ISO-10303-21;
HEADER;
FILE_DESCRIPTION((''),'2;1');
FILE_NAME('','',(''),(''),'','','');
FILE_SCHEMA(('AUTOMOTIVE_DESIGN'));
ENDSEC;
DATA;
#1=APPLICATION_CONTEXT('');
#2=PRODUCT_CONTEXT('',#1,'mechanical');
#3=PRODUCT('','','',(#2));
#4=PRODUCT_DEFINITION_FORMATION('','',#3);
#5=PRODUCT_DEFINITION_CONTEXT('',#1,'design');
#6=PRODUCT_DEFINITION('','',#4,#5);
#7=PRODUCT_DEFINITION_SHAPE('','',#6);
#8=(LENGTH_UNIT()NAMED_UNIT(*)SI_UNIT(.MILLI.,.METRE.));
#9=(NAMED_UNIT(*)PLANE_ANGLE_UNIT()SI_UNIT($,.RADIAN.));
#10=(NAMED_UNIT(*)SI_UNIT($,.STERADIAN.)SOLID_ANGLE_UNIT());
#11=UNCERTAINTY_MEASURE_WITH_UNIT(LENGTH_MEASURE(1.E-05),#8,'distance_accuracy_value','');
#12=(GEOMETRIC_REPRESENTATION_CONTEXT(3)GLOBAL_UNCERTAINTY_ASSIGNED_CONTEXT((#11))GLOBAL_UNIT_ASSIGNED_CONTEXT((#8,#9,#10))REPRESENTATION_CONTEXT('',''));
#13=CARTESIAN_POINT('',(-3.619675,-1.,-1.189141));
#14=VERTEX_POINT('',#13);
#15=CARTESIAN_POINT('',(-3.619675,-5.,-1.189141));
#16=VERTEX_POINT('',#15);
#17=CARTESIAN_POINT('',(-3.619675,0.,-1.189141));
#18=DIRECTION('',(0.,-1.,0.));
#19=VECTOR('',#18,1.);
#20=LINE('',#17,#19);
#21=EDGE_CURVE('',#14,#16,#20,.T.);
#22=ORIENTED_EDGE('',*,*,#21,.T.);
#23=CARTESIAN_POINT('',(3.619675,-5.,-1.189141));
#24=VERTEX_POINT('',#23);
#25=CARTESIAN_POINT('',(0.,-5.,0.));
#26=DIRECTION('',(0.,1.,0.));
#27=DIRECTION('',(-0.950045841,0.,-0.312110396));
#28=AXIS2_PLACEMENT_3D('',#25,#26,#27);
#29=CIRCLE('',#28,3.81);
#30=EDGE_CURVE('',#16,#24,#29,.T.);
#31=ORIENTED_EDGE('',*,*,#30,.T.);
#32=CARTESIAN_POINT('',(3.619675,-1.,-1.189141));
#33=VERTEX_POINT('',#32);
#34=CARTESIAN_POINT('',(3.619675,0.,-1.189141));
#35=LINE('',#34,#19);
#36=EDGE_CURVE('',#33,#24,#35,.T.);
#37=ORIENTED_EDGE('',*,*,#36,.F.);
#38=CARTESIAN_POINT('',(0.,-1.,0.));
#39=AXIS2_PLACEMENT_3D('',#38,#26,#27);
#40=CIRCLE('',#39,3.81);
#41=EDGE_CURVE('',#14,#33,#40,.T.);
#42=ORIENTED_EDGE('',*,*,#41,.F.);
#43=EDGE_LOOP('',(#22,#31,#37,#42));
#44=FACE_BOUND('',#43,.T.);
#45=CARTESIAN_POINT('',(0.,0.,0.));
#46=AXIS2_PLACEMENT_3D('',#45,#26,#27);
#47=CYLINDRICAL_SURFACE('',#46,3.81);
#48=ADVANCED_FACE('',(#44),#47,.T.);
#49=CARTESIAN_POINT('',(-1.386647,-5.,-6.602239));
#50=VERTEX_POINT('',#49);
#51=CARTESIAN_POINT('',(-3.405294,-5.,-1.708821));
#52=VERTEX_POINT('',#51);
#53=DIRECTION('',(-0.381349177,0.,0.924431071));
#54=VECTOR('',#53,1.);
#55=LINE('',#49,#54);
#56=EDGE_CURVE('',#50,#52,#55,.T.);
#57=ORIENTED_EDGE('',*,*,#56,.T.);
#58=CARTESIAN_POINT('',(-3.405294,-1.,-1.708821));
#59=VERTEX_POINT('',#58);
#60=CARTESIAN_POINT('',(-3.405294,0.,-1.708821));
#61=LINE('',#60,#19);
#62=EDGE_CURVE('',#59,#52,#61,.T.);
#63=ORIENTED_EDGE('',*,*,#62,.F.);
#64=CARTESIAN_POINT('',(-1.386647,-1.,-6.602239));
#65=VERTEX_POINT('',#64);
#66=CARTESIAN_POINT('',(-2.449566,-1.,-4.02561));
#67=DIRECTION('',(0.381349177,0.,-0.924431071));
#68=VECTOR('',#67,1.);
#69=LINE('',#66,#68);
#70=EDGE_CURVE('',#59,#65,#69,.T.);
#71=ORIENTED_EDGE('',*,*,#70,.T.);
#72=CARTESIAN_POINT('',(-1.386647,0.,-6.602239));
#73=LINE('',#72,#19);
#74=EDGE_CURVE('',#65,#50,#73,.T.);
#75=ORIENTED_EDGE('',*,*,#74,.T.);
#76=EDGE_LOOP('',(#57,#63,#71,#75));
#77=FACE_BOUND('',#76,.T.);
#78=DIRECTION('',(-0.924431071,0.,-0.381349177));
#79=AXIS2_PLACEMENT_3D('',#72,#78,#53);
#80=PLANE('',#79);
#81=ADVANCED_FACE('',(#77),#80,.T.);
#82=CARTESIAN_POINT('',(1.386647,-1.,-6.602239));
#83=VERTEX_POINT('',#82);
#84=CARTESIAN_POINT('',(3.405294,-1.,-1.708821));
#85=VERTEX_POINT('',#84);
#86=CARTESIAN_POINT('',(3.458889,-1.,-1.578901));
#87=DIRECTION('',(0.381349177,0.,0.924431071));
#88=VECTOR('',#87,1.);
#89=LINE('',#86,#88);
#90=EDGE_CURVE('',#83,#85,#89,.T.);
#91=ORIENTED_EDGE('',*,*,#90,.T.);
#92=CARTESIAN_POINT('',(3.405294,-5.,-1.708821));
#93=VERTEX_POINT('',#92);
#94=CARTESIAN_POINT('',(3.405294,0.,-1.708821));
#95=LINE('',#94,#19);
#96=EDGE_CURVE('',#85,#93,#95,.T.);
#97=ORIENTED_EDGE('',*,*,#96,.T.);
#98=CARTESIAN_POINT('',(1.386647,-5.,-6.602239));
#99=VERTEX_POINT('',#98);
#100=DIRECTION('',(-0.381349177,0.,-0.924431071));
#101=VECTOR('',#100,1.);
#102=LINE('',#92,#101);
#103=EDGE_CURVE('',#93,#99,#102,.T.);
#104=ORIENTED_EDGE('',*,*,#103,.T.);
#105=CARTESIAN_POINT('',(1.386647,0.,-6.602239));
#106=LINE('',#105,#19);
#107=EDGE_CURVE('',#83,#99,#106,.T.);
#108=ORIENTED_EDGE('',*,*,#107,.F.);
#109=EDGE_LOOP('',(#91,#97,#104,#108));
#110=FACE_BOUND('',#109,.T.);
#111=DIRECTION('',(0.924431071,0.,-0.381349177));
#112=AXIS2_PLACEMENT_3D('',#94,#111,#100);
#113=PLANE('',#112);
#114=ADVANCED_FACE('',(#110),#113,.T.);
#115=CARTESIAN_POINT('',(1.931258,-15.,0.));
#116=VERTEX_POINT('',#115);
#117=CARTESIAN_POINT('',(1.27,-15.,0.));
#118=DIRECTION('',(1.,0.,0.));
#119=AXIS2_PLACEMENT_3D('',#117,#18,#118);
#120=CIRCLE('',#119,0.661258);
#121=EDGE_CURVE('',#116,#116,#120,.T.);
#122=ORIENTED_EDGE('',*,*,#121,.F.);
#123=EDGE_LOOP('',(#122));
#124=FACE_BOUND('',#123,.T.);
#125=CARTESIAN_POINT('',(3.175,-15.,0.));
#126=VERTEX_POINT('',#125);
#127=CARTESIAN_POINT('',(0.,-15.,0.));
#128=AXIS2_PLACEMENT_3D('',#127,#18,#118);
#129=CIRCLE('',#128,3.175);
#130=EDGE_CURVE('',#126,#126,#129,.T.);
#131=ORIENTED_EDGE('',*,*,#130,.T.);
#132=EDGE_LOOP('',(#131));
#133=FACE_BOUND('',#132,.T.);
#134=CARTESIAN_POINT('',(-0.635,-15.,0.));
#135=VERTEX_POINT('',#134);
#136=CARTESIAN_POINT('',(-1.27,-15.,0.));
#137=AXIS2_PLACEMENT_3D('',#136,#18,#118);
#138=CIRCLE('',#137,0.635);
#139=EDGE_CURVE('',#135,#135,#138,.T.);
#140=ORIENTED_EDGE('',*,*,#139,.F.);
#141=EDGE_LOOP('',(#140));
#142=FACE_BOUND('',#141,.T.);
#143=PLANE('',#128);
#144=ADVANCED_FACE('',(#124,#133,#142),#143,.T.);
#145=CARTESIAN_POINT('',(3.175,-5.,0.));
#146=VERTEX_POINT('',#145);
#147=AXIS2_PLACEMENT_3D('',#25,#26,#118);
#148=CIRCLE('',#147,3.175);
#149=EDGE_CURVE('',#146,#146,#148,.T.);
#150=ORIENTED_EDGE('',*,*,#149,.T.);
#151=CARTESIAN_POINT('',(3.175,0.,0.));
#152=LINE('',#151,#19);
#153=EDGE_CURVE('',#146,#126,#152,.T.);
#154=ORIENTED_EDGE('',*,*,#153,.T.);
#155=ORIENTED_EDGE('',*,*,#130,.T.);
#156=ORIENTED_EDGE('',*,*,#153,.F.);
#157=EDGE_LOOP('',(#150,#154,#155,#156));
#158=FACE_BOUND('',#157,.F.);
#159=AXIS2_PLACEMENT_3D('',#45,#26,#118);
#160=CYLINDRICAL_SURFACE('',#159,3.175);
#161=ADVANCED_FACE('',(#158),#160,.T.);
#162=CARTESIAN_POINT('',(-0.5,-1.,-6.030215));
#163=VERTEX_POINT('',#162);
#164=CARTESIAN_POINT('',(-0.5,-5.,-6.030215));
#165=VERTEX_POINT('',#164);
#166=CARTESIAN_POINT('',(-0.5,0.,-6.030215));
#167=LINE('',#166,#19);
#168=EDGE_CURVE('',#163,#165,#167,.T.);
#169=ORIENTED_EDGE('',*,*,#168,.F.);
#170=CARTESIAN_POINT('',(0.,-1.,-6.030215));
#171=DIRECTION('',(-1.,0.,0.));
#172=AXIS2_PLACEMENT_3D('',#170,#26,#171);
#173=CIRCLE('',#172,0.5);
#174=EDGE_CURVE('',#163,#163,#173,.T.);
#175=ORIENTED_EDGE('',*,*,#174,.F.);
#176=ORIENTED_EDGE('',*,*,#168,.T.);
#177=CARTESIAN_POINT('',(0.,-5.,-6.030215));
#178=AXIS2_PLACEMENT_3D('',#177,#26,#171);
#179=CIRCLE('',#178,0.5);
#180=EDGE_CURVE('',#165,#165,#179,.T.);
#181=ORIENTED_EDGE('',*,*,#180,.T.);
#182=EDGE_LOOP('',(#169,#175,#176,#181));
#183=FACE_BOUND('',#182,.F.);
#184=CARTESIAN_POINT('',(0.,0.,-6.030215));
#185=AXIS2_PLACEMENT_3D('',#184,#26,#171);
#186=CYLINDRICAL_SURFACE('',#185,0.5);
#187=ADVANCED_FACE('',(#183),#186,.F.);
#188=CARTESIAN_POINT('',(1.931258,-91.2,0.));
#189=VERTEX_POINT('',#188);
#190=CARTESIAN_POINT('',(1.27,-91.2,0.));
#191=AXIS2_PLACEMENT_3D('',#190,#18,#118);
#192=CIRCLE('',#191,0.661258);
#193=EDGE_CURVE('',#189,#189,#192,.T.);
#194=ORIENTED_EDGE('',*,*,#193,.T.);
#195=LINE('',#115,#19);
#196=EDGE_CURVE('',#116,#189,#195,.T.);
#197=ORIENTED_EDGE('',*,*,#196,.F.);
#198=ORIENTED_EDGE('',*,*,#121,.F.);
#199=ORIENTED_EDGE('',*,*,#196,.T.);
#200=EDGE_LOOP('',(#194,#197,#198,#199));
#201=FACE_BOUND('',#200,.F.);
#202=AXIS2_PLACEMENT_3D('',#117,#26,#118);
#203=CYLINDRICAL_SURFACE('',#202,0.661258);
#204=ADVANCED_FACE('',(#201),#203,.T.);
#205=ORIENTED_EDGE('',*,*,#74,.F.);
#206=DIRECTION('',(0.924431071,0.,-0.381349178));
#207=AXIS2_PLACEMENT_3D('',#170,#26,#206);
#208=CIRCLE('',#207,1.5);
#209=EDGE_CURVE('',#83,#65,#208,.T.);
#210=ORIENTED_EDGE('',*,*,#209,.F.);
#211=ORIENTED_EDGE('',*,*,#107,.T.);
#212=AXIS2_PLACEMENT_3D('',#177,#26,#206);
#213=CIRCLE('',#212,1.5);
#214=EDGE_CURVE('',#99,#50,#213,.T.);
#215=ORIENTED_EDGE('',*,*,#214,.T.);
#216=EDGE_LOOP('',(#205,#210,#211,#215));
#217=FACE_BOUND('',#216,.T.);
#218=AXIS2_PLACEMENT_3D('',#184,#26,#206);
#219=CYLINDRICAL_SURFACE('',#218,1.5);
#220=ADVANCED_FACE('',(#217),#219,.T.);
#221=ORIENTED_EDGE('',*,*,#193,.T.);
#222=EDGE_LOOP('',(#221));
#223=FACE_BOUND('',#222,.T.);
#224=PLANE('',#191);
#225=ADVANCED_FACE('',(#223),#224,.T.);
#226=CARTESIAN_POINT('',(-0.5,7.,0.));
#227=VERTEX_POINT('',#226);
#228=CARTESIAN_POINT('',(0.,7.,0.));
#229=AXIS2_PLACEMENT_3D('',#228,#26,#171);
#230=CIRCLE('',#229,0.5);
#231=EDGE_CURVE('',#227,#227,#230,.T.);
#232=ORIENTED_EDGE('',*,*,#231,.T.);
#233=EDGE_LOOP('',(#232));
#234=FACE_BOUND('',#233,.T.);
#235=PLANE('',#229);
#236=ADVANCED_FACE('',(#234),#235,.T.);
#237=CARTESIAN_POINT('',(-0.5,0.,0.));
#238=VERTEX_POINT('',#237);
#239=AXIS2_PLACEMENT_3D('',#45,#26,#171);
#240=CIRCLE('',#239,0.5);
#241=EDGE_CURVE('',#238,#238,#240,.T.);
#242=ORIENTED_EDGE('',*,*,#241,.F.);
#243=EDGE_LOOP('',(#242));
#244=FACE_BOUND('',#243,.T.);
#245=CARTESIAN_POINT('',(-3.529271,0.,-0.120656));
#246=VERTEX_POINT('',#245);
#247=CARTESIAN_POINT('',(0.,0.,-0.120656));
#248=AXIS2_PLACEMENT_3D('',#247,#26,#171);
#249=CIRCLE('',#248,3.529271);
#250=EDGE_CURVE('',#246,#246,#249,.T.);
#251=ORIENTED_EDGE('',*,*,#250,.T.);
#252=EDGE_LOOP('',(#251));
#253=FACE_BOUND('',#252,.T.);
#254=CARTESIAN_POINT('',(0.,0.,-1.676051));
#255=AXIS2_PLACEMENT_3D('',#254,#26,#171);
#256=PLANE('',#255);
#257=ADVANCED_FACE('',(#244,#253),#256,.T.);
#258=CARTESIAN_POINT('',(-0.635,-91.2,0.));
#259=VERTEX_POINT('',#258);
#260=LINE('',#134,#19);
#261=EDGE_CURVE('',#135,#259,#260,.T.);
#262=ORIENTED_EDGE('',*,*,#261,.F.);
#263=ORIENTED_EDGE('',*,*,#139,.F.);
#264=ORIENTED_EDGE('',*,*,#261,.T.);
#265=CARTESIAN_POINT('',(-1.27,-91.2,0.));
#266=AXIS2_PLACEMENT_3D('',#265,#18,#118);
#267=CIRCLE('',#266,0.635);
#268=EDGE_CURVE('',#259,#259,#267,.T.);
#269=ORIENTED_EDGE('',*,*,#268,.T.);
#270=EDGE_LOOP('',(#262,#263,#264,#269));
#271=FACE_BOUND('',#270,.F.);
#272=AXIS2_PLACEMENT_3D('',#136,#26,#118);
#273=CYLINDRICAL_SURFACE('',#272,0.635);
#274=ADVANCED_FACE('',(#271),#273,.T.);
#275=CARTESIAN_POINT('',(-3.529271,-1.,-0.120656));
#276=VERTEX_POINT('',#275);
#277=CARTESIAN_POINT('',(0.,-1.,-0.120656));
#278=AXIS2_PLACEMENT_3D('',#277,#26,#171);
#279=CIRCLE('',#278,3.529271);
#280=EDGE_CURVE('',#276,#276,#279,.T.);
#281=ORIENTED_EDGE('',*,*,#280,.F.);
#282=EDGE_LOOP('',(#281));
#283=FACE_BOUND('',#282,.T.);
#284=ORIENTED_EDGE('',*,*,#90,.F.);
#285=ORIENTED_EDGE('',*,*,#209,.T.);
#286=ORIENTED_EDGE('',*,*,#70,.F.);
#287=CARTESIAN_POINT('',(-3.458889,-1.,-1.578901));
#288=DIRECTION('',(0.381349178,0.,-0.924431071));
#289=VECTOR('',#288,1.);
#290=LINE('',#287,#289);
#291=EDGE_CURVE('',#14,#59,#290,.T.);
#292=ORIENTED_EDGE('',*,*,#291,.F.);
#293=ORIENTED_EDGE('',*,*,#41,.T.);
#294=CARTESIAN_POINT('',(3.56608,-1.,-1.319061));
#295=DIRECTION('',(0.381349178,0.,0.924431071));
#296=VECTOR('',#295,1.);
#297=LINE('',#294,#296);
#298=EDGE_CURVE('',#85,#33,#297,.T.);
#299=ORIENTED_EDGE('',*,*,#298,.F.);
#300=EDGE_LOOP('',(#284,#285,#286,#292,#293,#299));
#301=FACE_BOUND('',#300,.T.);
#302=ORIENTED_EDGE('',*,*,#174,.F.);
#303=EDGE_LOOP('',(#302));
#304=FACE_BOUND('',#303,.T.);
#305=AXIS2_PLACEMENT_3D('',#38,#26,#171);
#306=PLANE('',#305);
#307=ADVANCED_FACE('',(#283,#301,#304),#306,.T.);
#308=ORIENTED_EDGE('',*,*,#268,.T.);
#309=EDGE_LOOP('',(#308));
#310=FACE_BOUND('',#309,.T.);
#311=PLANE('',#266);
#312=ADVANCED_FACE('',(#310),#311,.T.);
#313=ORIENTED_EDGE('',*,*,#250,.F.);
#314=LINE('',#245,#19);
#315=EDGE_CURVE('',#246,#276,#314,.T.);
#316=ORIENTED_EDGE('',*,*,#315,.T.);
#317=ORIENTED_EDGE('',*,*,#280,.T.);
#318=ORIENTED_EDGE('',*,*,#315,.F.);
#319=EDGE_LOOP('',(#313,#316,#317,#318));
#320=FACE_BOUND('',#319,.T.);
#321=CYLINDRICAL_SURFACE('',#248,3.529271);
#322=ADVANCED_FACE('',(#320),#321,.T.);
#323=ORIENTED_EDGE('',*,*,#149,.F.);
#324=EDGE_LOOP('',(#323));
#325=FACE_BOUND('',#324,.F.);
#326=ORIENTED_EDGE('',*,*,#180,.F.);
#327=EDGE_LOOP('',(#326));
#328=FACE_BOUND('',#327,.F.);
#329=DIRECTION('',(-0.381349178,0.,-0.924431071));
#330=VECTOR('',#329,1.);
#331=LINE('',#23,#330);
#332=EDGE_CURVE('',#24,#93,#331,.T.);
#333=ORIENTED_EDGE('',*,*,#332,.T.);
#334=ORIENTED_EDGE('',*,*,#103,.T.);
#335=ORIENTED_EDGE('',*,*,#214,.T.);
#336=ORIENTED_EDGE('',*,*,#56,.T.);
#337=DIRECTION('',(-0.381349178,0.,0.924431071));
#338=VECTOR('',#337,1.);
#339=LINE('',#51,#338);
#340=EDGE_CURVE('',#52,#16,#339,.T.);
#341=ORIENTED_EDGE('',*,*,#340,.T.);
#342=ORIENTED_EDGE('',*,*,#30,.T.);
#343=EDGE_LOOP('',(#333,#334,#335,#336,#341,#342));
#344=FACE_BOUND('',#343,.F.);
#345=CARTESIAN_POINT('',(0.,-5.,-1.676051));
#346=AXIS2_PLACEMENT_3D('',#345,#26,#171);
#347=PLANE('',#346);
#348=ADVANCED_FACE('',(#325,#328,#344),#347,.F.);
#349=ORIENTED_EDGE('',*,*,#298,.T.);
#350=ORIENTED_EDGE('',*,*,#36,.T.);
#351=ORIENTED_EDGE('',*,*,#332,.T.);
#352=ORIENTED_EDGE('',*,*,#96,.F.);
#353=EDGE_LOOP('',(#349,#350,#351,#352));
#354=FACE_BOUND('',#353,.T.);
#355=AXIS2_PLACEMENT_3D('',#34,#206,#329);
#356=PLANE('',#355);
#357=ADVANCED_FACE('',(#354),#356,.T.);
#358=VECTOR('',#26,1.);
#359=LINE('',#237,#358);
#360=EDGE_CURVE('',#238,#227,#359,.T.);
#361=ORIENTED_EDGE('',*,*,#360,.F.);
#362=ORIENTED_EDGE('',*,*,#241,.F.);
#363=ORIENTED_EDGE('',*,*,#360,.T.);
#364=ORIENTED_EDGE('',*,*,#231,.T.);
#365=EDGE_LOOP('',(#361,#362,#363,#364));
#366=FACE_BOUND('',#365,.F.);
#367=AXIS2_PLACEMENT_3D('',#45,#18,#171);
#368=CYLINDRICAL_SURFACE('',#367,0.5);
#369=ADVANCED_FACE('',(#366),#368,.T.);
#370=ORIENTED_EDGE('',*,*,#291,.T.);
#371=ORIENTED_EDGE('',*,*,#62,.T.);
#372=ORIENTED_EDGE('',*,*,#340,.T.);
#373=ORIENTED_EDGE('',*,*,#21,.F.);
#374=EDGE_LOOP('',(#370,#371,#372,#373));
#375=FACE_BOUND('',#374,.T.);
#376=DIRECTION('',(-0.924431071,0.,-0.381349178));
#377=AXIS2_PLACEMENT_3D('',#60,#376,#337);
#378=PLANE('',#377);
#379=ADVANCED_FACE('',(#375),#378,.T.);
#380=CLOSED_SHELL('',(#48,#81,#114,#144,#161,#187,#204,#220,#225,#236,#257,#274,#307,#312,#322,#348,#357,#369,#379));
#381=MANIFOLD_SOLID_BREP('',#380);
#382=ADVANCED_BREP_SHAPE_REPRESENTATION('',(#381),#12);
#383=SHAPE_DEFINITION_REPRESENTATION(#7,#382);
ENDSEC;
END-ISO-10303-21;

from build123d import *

# Parameters (mm, degrees)
F0_R     = 3.175
F1_DEPTH = 15
F2_R     = 0.5
F3_DEPTH = 7
F4_R     = 0.5
F4_R_2   = 3.175
F5_DEPTH = 5
F6_R     = 9.3189524644
F6_R_2   = 3.5292713956
F7_DEPTH = 1
F8_R     = 0.635
F8_R_2   = 0.6612583991
F9_DEPTH = 76.2


with BuildPart() as f1:
    # F0 (on Front) → F1 (new body)
    with BuildSketch(Plane.XZ):
        Circle(F0_R)
    extrude(amount=F1_DEPTH)

    # F2 (on face) → F3 (join)
    with BuildSketch(Plane(origin=(0, 0, 0), x_dir=(-1, 0, 0), z_dir=(0, 1, 0))):
        Circle(F2_R)
    extrude(amount=F3_DEPTH)

    # F4 (on face) → F5 (join)
    with BuildSketch(Plane(origin=(0, 0, 0), x_dir=(-1, 0, 0), z_dir=(0, 1, 0))):
        with BuildLine():
            Line((1.3866466063, -6.6022387167), (3.4052943148, -1.7088214153))
            Line((3.4052943148, -1.7088214153), (3.6196746552, -1.1891406101))
            ThreePointArc((3.6196746552, -1.1891406101), (0, 3.81), (-3.6196746552, -1.1891406101))
            Line((-3.6196746552, -1.1891406101), (-3.4052943148, -1.7088214153))
            Line((-3.4052943148, -1.7088214153), (-1.3866466063, -6.6022387167))
            ThreePointArc((-1.3866466063, -6.6022387167), (0, -7.5302149504), (1.3866466063, -6.6022387167))
        make_face()
        with Locations((0, -6.0302149504)):
            Circle(F4_R, mode=Mode.SUBTRACT)
        Circle(F4_R_2, mode=Mode.SUBTRACT)
        Circle(F4_R_2)
        Circle(F4_R, mode=Mode.SUBTRACT)
    extrude(amount=-F5_DEPTH)

    # F6 (on face) → F7 (cut)
    with BuildSketch(Plane(origin=(0, 0, 0), x_dir=(-1, 0, 0), z_dir=(0, 1, 0))):
        Circle(F6_R)
        with Locations((0, -0.1206563757)):
            Circle(F6_R_2, mode=Mode.SUBTRACT)
    extrude(amount=-F7_DEPTH, mode=Mode.SUBTRACT)

    # F8 (on face) → F9 (join)
    with BuildSketch(Plane.XZ.offset(15)):
        with Locations((-1.27, 0)):
            Circle(F8_R)
        with Locations((1.27, 0)):
            Circle(F8_R_2)
    extrude(amount=F9_DEPTH)


solid = f1.part
